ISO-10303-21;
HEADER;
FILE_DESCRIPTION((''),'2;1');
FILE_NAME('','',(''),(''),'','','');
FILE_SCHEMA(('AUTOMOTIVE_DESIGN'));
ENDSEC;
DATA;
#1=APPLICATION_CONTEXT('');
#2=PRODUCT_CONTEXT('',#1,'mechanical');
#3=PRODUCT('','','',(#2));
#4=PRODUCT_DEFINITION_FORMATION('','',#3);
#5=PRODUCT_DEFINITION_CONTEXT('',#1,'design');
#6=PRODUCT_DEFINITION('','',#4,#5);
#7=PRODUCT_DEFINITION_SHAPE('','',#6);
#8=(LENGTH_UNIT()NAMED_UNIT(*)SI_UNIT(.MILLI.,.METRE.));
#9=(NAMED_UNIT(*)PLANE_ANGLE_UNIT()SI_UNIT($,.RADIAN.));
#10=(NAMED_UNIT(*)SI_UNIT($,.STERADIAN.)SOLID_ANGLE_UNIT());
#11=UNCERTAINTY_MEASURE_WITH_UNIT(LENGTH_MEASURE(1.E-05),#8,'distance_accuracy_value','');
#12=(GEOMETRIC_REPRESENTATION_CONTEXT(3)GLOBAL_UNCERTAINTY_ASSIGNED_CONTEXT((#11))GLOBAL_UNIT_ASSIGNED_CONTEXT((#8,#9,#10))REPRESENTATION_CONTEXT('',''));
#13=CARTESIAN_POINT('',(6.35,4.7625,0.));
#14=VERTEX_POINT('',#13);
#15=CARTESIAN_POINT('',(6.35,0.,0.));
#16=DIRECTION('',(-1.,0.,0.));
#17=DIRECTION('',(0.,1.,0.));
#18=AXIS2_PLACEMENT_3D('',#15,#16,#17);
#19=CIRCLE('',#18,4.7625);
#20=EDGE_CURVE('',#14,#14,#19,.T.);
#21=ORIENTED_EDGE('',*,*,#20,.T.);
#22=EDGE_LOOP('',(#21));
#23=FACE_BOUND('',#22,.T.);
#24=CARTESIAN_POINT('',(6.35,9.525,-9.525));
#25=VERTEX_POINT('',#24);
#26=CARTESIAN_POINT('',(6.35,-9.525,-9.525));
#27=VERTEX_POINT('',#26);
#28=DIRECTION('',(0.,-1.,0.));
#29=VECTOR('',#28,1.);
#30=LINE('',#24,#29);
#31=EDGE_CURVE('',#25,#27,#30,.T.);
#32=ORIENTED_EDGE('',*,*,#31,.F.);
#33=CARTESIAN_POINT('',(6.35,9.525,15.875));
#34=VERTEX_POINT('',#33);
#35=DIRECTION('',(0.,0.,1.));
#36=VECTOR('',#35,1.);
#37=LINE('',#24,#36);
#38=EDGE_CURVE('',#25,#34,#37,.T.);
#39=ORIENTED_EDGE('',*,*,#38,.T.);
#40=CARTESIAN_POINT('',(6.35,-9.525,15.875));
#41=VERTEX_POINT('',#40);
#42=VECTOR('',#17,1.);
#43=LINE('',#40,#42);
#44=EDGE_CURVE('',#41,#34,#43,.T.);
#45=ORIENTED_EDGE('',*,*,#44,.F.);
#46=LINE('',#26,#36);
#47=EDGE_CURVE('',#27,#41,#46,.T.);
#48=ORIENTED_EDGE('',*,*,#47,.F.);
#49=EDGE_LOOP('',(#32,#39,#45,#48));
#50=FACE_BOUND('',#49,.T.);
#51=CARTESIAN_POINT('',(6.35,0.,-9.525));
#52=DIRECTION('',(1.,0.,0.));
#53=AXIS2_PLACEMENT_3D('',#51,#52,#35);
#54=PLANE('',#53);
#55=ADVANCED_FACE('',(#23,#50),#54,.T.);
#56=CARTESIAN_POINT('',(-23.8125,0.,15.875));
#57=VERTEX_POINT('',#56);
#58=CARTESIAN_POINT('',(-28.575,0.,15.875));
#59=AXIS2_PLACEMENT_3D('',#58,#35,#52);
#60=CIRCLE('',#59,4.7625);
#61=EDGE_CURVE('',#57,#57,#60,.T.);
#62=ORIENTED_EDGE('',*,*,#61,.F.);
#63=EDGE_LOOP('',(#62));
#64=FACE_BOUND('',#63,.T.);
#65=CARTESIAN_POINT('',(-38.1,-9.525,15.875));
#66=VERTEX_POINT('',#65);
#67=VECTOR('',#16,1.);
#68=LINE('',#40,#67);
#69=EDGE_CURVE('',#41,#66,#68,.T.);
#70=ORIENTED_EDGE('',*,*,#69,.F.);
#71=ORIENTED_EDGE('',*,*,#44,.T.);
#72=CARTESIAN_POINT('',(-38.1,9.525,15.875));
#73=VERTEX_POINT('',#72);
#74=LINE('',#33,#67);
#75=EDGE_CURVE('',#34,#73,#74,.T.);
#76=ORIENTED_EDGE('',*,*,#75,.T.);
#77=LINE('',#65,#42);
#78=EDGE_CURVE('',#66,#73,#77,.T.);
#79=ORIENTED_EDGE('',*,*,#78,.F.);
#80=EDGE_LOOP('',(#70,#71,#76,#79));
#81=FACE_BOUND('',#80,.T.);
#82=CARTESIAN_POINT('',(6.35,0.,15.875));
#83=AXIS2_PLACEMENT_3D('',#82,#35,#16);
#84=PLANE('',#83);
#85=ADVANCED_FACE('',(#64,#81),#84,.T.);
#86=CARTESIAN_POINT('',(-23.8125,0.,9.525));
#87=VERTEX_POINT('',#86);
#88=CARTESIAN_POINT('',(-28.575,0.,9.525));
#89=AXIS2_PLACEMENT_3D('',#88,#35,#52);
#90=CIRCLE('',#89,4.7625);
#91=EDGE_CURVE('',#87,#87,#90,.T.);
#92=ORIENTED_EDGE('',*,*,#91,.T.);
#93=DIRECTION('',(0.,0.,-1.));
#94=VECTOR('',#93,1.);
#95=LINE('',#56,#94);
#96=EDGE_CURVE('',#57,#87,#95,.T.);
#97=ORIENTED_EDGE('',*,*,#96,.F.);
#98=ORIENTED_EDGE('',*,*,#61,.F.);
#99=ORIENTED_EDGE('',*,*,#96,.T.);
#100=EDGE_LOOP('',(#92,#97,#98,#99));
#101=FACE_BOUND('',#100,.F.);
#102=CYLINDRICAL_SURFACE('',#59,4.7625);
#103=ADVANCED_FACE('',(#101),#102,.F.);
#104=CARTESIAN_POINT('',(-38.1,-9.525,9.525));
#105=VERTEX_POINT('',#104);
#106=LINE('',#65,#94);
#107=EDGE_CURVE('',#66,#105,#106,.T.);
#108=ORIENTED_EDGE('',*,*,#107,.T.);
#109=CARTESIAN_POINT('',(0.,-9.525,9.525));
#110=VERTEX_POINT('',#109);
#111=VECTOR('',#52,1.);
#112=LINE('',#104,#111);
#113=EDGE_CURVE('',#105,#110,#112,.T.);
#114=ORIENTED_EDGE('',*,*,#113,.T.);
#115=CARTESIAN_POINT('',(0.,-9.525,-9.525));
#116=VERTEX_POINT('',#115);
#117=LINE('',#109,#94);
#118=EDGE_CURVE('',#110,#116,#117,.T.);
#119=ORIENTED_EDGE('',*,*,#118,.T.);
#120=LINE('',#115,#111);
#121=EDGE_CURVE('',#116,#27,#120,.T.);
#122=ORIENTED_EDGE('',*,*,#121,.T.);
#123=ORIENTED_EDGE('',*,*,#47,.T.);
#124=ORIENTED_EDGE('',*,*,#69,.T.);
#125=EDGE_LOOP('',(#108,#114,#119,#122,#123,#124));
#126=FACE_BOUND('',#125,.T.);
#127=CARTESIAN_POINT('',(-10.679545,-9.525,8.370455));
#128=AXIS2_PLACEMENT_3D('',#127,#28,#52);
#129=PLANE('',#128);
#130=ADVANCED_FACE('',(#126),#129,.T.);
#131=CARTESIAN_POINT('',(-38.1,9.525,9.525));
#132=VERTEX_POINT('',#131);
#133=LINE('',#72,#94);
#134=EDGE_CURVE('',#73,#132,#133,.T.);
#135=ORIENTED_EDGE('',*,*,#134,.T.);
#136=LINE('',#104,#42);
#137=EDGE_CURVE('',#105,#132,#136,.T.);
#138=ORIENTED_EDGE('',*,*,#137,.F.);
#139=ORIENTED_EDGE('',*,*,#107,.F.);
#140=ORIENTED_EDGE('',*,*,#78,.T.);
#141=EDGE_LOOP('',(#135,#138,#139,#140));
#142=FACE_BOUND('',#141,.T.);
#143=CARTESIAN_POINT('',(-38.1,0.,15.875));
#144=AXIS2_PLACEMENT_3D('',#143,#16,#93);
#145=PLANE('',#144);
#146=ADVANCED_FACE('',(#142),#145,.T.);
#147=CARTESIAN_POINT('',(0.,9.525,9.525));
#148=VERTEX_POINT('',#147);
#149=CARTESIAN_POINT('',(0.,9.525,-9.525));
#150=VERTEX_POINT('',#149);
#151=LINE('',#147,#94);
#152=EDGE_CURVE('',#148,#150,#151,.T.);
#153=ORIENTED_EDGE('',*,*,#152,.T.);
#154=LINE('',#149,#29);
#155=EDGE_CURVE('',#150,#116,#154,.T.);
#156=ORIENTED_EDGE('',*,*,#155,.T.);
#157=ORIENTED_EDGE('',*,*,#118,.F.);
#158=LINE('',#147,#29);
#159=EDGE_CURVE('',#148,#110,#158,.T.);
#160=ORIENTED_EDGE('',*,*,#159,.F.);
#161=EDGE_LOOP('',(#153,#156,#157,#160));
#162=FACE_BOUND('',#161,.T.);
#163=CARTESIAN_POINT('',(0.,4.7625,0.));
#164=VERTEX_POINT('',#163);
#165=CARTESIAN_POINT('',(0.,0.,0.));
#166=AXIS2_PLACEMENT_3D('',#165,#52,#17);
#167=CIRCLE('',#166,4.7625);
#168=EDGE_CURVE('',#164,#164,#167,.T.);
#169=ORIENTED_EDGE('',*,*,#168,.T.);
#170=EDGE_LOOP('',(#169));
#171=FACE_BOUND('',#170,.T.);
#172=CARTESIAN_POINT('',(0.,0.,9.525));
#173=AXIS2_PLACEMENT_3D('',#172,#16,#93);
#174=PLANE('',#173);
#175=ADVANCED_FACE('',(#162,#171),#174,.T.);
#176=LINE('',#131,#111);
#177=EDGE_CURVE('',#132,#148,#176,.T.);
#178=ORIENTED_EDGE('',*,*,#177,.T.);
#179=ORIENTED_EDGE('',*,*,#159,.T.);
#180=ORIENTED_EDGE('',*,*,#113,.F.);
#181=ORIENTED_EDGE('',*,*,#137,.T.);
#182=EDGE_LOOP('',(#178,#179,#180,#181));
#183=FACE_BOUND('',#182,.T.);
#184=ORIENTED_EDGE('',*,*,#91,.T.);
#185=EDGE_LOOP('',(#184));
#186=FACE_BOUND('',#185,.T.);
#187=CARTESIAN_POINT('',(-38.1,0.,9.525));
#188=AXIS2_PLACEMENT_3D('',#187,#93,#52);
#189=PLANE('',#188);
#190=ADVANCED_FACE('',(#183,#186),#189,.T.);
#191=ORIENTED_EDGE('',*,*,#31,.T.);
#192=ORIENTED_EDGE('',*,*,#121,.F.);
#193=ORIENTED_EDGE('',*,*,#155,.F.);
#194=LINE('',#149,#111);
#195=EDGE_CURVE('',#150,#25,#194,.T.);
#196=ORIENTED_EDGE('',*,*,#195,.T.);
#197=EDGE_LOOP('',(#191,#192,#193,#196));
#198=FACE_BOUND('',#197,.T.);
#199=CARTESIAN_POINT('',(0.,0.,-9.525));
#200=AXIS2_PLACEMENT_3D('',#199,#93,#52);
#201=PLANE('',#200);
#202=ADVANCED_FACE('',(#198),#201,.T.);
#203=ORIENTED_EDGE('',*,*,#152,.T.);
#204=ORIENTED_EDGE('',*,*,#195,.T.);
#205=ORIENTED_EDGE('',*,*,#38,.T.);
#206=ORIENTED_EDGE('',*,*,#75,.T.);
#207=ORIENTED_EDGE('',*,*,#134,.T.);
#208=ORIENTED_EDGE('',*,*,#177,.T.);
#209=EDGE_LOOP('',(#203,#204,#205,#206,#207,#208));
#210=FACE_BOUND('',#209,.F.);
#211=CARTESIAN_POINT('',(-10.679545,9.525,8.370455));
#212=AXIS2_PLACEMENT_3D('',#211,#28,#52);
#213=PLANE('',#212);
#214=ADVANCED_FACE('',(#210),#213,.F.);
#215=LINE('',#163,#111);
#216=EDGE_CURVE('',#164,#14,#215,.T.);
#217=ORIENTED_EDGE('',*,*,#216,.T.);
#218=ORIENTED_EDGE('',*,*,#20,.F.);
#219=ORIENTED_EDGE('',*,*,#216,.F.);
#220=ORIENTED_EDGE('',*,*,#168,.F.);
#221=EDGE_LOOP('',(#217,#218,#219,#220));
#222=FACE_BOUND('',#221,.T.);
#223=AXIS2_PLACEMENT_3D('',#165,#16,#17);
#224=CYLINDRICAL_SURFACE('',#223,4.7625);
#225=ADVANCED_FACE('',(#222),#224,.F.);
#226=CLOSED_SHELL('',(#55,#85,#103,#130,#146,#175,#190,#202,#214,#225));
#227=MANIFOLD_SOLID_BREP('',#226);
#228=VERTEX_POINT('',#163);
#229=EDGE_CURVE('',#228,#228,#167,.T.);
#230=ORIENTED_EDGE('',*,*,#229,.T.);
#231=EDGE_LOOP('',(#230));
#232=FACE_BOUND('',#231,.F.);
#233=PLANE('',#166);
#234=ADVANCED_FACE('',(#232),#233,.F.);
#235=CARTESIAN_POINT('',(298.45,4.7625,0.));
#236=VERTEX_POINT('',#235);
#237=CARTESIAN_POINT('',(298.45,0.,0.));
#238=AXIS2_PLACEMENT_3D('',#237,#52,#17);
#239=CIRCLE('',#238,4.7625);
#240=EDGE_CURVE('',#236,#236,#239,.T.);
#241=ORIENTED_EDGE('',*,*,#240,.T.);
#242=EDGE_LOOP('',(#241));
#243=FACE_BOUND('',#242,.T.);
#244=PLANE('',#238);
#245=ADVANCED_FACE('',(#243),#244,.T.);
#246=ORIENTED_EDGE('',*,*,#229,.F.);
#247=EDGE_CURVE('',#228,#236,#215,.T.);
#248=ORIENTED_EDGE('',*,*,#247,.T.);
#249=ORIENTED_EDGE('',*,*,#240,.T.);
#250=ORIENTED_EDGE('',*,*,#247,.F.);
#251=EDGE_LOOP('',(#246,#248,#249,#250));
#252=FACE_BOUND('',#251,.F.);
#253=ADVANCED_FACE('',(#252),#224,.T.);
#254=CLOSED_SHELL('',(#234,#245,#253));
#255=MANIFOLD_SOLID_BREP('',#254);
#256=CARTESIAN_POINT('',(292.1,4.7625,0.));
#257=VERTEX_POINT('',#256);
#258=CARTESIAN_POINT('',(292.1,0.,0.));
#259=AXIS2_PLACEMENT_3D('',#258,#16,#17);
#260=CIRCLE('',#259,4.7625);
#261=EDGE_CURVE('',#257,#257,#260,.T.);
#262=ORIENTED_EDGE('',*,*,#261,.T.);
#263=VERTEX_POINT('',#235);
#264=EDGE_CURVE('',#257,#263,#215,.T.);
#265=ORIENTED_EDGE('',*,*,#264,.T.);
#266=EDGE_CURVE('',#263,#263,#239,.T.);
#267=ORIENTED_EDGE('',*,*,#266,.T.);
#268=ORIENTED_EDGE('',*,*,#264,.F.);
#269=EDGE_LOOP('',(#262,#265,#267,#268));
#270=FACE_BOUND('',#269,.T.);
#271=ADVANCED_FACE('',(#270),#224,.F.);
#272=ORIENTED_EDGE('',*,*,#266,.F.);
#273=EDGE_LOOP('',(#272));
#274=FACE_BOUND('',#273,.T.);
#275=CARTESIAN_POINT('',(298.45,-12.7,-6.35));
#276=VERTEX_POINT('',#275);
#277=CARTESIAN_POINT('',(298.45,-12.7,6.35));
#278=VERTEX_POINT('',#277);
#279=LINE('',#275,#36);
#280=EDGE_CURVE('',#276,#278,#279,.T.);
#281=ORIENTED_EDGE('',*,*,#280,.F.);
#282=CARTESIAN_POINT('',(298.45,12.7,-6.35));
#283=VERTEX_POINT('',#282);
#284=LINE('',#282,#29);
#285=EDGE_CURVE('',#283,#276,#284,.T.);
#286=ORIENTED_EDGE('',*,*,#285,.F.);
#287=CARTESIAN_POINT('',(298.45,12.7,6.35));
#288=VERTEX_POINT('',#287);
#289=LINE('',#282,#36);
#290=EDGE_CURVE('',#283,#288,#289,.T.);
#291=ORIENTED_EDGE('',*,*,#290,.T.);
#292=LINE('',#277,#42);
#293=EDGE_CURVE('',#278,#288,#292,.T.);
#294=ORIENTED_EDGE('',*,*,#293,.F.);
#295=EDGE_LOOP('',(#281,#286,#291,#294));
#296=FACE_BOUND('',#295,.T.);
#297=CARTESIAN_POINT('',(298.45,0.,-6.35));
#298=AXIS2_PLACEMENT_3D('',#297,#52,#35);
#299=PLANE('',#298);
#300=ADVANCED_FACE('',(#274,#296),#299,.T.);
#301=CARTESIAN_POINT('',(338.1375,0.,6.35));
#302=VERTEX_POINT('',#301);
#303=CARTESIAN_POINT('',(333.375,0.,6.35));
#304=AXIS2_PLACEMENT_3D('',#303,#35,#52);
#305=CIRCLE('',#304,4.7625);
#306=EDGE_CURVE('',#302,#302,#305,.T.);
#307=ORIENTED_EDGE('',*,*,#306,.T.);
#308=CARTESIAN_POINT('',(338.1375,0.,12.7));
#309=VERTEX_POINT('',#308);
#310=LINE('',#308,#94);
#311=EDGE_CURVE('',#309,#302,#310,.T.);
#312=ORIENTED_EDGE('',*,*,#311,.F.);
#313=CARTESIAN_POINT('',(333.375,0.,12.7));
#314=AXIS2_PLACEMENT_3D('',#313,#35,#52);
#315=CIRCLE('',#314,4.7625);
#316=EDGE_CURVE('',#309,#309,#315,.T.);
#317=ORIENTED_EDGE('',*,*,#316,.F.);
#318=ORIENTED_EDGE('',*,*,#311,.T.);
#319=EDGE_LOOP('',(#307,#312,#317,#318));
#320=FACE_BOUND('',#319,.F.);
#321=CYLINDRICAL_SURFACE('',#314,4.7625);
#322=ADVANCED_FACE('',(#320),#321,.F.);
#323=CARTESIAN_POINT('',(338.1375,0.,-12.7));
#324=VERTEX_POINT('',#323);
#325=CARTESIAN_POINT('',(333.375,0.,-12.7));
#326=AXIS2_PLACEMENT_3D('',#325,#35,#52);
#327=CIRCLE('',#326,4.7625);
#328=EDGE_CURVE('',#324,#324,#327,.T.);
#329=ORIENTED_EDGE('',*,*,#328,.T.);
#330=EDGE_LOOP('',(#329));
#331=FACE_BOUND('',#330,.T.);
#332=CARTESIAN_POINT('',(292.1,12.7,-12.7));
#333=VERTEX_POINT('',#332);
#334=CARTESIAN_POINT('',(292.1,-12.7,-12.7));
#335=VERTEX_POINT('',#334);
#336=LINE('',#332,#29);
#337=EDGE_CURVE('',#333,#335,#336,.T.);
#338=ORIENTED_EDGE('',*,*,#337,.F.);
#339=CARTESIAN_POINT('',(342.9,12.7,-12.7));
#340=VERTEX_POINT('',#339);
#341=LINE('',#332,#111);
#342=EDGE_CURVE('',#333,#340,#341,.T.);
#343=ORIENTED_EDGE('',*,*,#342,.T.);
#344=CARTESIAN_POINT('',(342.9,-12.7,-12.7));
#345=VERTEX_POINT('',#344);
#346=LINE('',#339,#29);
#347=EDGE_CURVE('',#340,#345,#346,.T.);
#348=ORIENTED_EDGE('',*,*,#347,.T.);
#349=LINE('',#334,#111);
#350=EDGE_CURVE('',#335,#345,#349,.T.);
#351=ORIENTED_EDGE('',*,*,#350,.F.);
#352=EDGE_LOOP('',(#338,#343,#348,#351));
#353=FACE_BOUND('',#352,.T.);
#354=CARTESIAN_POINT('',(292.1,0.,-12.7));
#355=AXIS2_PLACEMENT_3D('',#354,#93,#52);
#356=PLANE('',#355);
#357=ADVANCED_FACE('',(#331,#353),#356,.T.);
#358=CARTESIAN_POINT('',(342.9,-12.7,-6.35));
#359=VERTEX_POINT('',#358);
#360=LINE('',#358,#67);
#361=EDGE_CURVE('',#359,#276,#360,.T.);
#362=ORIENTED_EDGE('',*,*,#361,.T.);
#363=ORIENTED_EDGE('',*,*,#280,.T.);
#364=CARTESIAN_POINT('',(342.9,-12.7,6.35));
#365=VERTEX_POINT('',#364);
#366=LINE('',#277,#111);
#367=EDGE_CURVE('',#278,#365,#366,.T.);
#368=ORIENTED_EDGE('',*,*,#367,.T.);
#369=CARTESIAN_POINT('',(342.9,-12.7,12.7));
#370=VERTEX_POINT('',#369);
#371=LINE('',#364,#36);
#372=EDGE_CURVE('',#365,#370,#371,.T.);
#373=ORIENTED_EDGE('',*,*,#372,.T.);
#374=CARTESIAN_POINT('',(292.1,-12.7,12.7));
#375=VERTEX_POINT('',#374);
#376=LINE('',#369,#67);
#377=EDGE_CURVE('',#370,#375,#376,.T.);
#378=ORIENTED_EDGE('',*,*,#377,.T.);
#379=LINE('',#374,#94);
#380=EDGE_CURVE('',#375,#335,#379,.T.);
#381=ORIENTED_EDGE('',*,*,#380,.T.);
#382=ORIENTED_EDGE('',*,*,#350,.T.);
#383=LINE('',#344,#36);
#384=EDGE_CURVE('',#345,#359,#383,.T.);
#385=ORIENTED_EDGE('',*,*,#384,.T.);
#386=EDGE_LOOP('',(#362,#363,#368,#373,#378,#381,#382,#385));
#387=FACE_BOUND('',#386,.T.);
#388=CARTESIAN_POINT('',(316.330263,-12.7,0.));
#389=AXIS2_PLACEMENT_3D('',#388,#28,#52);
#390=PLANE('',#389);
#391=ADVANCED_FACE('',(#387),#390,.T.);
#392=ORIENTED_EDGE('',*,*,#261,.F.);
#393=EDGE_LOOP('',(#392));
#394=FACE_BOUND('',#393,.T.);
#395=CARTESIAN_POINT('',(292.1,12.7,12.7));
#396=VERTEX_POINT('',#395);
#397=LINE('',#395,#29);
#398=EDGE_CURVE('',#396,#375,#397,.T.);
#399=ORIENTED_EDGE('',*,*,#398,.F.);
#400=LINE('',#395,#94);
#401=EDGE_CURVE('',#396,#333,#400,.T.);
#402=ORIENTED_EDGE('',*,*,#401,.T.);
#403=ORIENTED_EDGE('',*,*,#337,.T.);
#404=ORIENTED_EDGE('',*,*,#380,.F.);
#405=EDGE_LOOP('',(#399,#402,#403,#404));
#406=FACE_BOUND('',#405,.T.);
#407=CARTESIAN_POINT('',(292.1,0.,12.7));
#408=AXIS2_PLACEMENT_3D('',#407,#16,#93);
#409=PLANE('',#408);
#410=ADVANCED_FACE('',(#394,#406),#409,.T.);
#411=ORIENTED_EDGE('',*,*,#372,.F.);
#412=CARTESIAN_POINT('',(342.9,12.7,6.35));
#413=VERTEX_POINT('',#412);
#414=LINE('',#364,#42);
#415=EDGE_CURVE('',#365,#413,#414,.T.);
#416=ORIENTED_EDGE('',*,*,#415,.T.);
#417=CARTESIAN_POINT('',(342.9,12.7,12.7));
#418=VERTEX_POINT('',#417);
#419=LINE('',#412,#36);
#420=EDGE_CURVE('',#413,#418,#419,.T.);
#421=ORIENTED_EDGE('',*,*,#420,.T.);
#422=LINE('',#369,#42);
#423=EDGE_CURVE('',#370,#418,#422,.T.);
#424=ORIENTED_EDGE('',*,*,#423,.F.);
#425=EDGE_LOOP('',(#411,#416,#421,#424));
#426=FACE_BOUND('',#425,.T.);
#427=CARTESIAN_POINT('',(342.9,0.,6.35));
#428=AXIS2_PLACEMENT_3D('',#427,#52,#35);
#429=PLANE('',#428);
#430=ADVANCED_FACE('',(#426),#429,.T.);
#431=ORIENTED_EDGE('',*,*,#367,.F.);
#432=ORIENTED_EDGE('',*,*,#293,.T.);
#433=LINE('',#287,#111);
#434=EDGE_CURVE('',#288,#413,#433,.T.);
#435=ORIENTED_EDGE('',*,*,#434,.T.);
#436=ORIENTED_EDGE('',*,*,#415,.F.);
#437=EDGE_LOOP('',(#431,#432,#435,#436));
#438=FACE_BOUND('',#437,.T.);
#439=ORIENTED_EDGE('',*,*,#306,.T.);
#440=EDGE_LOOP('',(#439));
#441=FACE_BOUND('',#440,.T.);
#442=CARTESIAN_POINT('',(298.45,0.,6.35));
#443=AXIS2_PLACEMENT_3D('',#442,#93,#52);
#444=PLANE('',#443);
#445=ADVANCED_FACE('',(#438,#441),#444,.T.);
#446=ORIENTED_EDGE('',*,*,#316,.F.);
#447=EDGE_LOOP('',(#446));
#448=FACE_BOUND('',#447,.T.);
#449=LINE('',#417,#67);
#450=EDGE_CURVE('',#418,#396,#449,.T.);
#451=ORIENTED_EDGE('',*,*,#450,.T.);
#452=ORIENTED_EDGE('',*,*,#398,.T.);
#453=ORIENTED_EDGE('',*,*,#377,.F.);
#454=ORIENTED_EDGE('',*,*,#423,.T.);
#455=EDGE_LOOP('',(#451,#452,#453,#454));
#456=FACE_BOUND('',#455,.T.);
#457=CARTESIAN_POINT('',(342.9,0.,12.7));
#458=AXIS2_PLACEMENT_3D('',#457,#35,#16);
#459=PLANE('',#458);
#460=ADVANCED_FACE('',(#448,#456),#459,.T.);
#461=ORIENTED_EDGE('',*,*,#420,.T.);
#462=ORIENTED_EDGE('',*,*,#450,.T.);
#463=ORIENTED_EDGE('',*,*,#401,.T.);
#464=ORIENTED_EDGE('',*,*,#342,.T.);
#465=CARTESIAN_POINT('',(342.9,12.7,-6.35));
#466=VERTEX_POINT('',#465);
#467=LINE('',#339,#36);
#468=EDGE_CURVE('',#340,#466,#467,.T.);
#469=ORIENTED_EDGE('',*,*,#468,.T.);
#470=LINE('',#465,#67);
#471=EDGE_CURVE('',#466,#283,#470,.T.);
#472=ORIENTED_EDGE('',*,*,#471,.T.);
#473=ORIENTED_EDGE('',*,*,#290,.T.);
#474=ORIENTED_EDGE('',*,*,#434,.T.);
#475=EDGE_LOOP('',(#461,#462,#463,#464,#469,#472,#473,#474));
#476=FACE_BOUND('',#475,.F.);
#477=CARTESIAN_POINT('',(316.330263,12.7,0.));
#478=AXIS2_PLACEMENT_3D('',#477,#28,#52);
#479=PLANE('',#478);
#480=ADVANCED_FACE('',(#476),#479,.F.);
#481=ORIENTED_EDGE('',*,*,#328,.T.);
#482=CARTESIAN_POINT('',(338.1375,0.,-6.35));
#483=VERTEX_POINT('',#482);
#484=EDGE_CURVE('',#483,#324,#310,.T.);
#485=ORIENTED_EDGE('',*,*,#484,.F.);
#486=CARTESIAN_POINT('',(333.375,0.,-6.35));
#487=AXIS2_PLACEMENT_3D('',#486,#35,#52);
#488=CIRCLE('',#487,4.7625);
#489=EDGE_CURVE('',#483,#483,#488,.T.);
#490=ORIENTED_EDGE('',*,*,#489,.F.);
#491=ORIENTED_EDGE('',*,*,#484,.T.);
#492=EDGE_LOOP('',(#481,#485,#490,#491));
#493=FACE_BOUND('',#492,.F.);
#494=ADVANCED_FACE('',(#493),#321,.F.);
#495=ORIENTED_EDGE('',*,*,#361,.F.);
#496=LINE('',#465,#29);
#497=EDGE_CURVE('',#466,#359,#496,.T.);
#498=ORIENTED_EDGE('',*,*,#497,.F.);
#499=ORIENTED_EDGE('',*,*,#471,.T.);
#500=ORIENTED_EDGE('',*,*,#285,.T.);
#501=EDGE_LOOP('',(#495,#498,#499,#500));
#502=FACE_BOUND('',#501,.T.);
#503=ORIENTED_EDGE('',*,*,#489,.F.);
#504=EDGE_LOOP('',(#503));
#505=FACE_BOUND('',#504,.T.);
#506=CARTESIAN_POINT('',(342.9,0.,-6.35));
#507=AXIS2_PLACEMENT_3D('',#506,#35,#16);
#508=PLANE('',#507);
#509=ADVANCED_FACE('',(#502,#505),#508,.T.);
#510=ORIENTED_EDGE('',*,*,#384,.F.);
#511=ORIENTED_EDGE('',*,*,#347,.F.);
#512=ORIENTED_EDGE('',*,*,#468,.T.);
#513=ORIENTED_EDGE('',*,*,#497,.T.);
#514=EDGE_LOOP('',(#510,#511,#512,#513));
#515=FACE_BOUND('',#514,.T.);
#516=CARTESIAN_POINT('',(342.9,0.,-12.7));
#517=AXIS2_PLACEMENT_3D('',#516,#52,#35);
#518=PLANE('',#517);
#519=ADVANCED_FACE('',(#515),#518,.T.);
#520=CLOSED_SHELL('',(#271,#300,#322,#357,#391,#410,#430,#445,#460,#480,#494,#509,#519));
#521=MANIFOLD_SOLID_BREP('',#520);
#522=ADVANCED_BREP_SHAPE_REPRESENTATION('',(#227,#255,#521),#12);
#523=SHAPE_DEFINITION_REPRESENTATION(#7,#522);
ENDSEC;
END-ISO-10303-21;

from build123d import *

# Parameters (mm, degrees)
F0_R      = 4.7625
F1_DEPTH  = 298.45
F3_DEPTH  = 9.525
F5_R      = 4.7625
F6_DEPTH  = 25.401
F8_DEPTH  = 12.7
F10_R     = 4.7625
F11_DEPTH = 25.401


# Not quite as in the source:
# - a length typed as a fraction of an inch, garbled in the dataset ("3 / 203.2 mm" for 3/8 in), is restored


with BuildPart() as f1:
    # F0 (on Right) → F1 (new body)
    with BuildSketch(Plane.YZ):
        Circle(F0_R)
    extrude(amount=F1_DEPTH)


with BuildPart() as f3:
    # F2 (on Front) → F3 (new body, symmetric)
    with BuildSketch(Plane.XZ):
        Polygon((-38.1, 9.525), (0, 9.525), (0, -9.525), (6.35, -9.525), (6.35, 15.875), (-38.1, 15.875), align=None)
    extrude(amount=F3_DEPTH, both=True)

    # F4: cut F1
    add(f1.part, mode=Mode.SUBTRACT)

    # F5 (on face) → F6 (cut, through all)
    with BuildSketch(Plane.XY.offset(15.875)):
        with Locations((-28.575, 0)):
            Circle(F5_R)
    extrude(amount=-F6_DEPTH, mode=Mode.SUBTRACT)


with BuildPart() as f8:
    # F7 (on Front) → F8 (new body, symmetric)
    with BuildSketch(Plane.XZ):
        Polygon((342.9, 12.7), (292.1, 12.7), (292.1, -12.7), (342.9, -12.7), (342.9, -6.35), (298.45, -6.35), (298.45, 6.35), (342.9, 6.35), align=None)
    extrude(amount=F8_DEPTH, both=True)

    # F9: cut F1
    add(f1.part, mode=Mode.SUBTRACT)

    # F10 (on face) → F11 (cut, through all)
    with BuildSketch(Plane.XY.offset(12.7)):
        with Locations((333.375, 0)):
            Circle(F10_R)
    extrude(amount=-F11_DEPTH, mode=Mode.SUBTRACT)


solid = Compound([f1.part, f3.part, f8.part])
